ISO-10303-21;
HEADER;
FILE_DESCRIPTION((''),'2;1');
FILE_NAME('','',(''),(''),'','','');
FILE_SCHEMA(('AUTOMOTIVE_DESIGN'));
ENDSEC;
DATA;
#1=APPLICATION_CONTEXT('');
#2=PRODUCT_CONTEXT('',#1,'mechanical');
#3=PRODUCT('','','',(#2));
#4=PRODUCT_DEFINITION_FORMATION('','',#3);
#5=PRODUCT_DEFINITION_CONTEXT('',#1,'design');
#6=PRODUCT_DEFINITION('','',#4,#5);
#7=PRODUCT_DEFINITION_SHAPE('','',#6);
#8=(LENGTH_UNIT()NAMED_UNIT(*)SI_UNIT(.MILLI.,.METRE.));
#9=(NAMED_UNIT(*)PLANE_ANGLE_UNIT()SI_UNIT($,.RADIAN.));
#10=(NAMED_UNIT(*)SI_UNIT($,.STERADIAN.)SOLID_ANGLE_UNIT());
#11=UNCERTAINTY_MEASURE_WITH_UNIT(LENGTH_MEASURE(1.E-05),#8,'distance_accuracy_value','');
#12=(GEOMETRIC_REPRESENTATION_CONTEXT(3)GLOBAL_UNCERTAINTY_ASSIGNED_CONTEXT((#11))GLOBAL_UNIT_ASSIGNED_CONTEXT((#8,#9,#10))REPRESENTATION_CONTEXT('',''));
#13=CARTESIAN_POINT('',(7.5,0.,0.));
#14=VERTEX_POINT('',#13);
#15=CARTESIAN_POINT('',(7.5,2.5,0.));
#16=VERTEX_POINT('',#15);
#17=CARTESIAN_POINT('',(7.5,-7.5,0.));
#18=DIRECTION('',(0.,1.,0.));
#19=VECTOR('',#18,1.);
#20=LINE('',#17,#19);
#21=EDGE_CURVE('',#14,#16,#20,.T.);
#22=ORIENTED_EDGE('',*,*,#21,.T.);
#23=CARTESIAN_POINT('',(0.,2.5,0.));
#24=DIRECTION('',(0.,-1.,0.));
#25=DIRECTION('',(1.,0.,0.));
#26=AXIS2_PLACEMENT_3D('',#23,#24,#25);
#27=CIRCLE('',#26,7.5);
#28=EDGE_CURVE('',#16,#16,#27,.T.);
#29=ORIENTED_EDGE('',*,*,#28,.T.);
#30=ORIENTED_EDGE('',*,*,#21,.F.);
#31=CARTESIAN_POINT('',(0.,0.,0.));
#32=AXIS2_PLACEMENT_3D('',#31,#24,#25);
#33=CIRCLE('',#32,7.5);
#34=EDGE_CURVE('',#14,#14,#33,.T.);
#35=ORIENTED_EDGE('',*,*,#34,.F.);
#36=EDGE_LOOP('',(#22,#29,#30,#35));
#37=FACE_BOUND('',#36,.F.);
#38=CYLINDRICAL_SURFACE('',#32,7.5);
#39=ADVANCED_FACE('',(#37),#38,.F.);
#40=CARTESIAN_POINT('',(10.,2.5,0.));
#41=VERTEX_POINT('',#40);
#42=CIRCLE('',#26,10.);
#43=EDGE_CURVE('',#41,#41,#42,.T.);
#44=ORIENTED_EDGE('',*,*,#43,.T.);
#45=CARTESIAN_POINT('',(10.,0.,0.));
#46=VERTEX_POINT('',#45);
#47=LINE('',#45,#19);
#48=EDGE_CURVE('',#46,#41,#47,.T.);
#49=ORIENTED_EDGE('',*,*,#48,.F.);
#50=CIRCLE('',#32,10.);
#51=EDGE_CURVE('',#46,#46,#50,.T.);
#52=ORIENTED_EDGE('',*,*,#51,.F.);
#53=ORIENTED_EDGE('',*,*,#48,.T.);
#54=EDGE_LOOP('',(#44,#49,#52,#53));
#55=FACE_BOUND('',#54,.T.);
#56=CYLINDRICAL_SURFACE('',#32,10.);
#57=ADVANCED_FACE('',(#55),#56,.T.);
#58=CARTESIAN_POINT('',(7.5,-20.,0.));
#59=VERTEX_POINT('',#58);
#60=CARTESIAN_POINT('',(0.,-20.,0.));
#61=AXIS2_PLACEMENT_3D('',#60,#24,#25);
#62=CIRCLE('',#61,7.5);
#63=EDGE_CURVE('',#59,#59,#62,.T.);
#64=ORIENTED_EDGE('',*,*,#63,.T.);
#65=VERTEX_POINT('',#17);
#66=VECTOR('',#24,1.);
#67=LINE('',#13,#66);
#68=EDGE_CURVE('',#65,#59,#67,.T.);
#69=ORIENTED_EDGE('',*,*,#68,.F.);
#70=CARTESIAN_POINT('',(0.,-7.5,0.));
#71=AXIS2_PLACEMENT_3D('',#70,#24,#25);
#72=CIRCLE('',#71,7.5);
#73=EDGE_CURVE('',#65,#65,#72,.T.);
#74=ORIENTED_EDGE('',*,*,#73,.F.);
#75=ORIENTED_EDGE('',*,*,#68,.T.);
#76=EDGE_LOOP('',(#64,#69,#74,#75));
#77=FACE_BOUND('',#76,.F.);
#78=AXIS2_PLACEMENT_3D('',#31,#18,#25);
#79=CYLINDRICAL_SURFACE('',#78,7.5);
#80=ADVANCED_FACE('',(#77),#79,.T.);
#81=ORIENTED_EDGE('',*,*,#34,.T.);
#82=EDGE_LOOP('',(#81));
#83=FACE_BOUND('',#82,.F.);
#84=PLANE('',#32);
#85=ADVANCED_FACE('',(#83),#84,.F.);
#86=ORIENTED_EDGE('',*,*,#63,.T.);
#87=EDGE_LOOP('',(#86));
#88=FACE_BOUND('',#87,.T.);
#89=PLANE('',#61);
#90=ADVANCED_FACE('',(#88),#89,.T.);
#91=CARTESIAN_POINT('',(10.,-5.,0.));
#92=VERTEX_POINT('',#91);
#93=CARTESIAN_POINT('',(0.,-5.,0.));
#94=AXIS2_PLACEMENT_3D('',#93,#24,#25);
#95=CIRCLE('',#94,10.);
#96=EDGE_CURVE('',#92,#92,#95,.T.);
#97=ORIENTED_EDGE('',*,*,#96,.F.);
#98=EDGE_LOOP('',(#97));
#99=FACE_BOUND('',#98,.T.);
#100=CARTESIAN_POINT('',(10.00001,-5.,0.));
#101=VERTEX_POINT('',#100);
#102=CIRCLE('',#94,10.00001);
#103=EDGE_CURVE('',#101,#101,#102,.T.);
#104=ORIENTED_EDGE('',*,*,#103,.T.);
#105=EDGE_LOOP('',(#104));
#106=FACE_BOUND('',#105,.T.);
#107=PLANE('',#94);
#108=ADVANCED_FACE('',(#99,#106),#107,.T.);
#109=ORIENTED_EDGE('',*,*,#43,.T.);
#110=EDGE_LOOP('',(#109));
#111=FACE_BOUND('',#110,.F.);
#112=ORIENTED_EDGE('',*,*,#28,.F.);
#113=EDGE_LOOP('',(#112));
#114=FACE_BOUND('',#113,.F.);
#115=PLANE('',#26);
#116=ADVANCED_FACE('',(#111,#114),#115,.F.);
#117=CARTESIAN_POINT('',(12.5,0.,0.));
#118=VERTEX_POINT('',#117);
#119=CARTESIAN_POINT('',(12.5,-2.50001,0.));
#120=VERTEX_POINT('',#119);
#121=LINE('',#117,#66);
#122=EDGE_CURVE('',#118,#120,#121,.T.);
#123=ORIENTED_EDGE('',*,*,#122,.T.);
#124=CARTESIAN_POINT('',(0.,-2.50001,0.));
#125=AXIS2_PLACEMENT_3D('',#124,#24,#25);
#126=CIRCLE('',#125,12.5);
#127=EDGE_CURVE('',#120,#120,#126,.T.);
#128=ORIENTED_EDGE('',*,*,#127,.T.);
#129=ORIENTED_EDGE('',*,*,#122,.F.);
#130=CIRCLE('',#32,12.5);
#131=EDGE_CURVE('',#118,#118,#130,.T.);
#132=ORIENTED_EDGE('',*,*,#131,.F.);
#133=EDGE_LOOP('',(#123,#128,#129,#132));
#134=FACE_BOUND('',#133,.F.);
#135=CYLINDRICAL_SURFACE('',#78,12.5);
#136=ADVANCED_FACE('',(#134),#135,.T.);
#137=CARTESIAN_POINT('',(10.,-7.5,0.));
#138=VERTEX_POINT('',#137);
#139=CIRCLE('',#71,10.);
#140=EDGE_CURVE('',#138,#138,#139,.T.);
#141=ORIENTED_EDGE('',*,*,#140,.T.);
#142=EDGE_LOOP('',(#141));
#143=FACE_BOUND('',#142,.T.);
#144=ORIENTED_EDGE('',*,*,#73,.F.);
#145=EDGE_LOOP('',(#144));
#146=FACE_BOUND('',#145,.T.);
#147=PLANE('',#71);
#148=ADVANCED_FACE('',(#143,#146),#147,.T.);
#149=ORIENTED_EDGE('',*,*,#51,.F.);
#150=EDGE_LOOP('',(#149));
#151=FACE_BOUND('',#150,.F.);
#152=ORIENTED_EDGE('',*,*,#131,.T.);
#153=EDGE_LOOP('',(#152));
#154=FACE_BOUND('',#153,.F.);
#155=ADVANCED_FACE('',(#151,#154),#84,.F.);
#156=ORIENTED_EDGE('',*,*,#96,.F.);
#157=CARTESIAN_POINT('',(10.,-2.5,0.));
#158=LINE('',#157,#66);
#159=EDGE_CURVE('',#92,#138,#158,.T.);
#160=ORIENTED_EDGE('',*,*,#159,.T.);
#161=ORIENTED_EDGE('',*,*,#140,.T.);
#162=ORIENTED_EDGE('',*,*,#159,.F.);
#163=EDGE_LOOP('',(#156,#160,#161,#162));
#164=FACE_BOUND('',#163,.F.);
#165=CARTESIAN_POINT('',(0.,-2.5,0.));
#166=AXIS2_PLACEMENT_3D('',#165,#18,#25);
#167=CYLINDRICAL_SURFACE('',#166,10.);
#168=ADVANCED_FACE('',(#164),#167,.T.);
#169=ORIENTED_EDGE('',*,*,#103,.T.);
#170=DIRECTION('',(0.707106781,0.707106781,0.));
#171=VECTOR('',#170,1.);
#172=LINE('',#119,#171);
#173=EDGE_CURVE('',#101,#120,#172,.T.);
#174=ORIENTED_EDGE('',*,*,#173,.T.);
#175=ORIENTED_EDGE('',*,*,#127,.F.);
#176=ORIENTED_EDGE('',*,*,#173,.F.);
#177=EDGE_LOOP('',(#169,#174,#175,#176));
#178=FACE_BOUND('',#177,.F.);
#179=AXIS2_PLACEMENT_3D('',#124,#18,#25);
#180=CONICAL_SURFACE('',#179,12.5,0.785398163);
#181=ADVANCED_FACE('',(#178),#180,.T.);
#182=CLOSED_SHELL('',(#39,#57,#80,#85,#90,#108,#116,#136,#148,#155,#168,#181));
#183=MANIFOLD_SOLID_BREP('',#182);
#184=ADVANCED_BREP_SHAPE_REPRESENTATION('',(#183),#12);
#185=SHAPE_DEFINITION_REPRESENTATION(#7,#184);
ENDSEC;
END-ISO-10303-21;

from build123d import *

# Parameters (mm, degrees)
F0_R        = 10
F0_R_2      = 7.5
F1_DEPTH    = 2.5
F1_FACE_R   = 10
F1_FACE_R_2 = 7.5
F2_R        = 12.5
F2_R_2      = 10
F3_DEPTH    = 5
F4_R        = 10
F4_R_2      = 7.5
F5_DEPTH    = 2.5
F7_SIZE     = 2.49999
F8_R        = 5
F6_R        = 7.5
F9_DEPTH    = 20


# Not quite as in the source:
# - a fillet or chamfer is up to 0.001 mm smaller than in the source, because OpenCascade refuses the exact size


with BuildPart() as f1:
    # F0 (on Front) → F1 (new body)
    with BuildSketch(Plane.XZ):
        Circle(F0_R)
        Circle(F0_R_2, mode=Mode.SUBTRACT)
    extrude(amount=F1_DEPTH)

    # F1_face (on face) + F2 (on Front) → F3 (join)
    with BuildSketch(Plane.XZ.offset(2.5)):
        Circle(F1_FACE_R)
        Circle(F1_FACE_R_2, mode=Mode.SUBTRACT)
    with BuildSketch(Plane.XZ):
        Circle(F2_R)
        Circle(F2_R_2, mode=Mode.SUBTRACT)
    extrude(amount=F3_DEPTH)

    # F4 (on Front) → F5 (join)
    with BuildSketch(Plane.XZ):
        Circle(F4_R)
        Circle(F4_R_2, mode=Mode.SUBTRACT)
    extrude(amount=-F5_DEPTH)

    # F7 (size 2.5 in the source; OpenCascade refuses exactly that, so slightly less here)
    f7_edges = [f1.edges().sort_by_distance(p)[0] for p in [
        (-12.5, -5, 0),
    ]]
    chamfer(f7_edges, length=F7_SIZE)

    # F8 (on Front) + F6 (on Front) → F9 (join)
    with BuildSketch(Plane.XZ):
        Circle(F8_R)
    with BuildSketch(Plane.XZ):
        Circle(F6_R)
    extrude(amount=F9_DEPTH)


solid = f1.part
